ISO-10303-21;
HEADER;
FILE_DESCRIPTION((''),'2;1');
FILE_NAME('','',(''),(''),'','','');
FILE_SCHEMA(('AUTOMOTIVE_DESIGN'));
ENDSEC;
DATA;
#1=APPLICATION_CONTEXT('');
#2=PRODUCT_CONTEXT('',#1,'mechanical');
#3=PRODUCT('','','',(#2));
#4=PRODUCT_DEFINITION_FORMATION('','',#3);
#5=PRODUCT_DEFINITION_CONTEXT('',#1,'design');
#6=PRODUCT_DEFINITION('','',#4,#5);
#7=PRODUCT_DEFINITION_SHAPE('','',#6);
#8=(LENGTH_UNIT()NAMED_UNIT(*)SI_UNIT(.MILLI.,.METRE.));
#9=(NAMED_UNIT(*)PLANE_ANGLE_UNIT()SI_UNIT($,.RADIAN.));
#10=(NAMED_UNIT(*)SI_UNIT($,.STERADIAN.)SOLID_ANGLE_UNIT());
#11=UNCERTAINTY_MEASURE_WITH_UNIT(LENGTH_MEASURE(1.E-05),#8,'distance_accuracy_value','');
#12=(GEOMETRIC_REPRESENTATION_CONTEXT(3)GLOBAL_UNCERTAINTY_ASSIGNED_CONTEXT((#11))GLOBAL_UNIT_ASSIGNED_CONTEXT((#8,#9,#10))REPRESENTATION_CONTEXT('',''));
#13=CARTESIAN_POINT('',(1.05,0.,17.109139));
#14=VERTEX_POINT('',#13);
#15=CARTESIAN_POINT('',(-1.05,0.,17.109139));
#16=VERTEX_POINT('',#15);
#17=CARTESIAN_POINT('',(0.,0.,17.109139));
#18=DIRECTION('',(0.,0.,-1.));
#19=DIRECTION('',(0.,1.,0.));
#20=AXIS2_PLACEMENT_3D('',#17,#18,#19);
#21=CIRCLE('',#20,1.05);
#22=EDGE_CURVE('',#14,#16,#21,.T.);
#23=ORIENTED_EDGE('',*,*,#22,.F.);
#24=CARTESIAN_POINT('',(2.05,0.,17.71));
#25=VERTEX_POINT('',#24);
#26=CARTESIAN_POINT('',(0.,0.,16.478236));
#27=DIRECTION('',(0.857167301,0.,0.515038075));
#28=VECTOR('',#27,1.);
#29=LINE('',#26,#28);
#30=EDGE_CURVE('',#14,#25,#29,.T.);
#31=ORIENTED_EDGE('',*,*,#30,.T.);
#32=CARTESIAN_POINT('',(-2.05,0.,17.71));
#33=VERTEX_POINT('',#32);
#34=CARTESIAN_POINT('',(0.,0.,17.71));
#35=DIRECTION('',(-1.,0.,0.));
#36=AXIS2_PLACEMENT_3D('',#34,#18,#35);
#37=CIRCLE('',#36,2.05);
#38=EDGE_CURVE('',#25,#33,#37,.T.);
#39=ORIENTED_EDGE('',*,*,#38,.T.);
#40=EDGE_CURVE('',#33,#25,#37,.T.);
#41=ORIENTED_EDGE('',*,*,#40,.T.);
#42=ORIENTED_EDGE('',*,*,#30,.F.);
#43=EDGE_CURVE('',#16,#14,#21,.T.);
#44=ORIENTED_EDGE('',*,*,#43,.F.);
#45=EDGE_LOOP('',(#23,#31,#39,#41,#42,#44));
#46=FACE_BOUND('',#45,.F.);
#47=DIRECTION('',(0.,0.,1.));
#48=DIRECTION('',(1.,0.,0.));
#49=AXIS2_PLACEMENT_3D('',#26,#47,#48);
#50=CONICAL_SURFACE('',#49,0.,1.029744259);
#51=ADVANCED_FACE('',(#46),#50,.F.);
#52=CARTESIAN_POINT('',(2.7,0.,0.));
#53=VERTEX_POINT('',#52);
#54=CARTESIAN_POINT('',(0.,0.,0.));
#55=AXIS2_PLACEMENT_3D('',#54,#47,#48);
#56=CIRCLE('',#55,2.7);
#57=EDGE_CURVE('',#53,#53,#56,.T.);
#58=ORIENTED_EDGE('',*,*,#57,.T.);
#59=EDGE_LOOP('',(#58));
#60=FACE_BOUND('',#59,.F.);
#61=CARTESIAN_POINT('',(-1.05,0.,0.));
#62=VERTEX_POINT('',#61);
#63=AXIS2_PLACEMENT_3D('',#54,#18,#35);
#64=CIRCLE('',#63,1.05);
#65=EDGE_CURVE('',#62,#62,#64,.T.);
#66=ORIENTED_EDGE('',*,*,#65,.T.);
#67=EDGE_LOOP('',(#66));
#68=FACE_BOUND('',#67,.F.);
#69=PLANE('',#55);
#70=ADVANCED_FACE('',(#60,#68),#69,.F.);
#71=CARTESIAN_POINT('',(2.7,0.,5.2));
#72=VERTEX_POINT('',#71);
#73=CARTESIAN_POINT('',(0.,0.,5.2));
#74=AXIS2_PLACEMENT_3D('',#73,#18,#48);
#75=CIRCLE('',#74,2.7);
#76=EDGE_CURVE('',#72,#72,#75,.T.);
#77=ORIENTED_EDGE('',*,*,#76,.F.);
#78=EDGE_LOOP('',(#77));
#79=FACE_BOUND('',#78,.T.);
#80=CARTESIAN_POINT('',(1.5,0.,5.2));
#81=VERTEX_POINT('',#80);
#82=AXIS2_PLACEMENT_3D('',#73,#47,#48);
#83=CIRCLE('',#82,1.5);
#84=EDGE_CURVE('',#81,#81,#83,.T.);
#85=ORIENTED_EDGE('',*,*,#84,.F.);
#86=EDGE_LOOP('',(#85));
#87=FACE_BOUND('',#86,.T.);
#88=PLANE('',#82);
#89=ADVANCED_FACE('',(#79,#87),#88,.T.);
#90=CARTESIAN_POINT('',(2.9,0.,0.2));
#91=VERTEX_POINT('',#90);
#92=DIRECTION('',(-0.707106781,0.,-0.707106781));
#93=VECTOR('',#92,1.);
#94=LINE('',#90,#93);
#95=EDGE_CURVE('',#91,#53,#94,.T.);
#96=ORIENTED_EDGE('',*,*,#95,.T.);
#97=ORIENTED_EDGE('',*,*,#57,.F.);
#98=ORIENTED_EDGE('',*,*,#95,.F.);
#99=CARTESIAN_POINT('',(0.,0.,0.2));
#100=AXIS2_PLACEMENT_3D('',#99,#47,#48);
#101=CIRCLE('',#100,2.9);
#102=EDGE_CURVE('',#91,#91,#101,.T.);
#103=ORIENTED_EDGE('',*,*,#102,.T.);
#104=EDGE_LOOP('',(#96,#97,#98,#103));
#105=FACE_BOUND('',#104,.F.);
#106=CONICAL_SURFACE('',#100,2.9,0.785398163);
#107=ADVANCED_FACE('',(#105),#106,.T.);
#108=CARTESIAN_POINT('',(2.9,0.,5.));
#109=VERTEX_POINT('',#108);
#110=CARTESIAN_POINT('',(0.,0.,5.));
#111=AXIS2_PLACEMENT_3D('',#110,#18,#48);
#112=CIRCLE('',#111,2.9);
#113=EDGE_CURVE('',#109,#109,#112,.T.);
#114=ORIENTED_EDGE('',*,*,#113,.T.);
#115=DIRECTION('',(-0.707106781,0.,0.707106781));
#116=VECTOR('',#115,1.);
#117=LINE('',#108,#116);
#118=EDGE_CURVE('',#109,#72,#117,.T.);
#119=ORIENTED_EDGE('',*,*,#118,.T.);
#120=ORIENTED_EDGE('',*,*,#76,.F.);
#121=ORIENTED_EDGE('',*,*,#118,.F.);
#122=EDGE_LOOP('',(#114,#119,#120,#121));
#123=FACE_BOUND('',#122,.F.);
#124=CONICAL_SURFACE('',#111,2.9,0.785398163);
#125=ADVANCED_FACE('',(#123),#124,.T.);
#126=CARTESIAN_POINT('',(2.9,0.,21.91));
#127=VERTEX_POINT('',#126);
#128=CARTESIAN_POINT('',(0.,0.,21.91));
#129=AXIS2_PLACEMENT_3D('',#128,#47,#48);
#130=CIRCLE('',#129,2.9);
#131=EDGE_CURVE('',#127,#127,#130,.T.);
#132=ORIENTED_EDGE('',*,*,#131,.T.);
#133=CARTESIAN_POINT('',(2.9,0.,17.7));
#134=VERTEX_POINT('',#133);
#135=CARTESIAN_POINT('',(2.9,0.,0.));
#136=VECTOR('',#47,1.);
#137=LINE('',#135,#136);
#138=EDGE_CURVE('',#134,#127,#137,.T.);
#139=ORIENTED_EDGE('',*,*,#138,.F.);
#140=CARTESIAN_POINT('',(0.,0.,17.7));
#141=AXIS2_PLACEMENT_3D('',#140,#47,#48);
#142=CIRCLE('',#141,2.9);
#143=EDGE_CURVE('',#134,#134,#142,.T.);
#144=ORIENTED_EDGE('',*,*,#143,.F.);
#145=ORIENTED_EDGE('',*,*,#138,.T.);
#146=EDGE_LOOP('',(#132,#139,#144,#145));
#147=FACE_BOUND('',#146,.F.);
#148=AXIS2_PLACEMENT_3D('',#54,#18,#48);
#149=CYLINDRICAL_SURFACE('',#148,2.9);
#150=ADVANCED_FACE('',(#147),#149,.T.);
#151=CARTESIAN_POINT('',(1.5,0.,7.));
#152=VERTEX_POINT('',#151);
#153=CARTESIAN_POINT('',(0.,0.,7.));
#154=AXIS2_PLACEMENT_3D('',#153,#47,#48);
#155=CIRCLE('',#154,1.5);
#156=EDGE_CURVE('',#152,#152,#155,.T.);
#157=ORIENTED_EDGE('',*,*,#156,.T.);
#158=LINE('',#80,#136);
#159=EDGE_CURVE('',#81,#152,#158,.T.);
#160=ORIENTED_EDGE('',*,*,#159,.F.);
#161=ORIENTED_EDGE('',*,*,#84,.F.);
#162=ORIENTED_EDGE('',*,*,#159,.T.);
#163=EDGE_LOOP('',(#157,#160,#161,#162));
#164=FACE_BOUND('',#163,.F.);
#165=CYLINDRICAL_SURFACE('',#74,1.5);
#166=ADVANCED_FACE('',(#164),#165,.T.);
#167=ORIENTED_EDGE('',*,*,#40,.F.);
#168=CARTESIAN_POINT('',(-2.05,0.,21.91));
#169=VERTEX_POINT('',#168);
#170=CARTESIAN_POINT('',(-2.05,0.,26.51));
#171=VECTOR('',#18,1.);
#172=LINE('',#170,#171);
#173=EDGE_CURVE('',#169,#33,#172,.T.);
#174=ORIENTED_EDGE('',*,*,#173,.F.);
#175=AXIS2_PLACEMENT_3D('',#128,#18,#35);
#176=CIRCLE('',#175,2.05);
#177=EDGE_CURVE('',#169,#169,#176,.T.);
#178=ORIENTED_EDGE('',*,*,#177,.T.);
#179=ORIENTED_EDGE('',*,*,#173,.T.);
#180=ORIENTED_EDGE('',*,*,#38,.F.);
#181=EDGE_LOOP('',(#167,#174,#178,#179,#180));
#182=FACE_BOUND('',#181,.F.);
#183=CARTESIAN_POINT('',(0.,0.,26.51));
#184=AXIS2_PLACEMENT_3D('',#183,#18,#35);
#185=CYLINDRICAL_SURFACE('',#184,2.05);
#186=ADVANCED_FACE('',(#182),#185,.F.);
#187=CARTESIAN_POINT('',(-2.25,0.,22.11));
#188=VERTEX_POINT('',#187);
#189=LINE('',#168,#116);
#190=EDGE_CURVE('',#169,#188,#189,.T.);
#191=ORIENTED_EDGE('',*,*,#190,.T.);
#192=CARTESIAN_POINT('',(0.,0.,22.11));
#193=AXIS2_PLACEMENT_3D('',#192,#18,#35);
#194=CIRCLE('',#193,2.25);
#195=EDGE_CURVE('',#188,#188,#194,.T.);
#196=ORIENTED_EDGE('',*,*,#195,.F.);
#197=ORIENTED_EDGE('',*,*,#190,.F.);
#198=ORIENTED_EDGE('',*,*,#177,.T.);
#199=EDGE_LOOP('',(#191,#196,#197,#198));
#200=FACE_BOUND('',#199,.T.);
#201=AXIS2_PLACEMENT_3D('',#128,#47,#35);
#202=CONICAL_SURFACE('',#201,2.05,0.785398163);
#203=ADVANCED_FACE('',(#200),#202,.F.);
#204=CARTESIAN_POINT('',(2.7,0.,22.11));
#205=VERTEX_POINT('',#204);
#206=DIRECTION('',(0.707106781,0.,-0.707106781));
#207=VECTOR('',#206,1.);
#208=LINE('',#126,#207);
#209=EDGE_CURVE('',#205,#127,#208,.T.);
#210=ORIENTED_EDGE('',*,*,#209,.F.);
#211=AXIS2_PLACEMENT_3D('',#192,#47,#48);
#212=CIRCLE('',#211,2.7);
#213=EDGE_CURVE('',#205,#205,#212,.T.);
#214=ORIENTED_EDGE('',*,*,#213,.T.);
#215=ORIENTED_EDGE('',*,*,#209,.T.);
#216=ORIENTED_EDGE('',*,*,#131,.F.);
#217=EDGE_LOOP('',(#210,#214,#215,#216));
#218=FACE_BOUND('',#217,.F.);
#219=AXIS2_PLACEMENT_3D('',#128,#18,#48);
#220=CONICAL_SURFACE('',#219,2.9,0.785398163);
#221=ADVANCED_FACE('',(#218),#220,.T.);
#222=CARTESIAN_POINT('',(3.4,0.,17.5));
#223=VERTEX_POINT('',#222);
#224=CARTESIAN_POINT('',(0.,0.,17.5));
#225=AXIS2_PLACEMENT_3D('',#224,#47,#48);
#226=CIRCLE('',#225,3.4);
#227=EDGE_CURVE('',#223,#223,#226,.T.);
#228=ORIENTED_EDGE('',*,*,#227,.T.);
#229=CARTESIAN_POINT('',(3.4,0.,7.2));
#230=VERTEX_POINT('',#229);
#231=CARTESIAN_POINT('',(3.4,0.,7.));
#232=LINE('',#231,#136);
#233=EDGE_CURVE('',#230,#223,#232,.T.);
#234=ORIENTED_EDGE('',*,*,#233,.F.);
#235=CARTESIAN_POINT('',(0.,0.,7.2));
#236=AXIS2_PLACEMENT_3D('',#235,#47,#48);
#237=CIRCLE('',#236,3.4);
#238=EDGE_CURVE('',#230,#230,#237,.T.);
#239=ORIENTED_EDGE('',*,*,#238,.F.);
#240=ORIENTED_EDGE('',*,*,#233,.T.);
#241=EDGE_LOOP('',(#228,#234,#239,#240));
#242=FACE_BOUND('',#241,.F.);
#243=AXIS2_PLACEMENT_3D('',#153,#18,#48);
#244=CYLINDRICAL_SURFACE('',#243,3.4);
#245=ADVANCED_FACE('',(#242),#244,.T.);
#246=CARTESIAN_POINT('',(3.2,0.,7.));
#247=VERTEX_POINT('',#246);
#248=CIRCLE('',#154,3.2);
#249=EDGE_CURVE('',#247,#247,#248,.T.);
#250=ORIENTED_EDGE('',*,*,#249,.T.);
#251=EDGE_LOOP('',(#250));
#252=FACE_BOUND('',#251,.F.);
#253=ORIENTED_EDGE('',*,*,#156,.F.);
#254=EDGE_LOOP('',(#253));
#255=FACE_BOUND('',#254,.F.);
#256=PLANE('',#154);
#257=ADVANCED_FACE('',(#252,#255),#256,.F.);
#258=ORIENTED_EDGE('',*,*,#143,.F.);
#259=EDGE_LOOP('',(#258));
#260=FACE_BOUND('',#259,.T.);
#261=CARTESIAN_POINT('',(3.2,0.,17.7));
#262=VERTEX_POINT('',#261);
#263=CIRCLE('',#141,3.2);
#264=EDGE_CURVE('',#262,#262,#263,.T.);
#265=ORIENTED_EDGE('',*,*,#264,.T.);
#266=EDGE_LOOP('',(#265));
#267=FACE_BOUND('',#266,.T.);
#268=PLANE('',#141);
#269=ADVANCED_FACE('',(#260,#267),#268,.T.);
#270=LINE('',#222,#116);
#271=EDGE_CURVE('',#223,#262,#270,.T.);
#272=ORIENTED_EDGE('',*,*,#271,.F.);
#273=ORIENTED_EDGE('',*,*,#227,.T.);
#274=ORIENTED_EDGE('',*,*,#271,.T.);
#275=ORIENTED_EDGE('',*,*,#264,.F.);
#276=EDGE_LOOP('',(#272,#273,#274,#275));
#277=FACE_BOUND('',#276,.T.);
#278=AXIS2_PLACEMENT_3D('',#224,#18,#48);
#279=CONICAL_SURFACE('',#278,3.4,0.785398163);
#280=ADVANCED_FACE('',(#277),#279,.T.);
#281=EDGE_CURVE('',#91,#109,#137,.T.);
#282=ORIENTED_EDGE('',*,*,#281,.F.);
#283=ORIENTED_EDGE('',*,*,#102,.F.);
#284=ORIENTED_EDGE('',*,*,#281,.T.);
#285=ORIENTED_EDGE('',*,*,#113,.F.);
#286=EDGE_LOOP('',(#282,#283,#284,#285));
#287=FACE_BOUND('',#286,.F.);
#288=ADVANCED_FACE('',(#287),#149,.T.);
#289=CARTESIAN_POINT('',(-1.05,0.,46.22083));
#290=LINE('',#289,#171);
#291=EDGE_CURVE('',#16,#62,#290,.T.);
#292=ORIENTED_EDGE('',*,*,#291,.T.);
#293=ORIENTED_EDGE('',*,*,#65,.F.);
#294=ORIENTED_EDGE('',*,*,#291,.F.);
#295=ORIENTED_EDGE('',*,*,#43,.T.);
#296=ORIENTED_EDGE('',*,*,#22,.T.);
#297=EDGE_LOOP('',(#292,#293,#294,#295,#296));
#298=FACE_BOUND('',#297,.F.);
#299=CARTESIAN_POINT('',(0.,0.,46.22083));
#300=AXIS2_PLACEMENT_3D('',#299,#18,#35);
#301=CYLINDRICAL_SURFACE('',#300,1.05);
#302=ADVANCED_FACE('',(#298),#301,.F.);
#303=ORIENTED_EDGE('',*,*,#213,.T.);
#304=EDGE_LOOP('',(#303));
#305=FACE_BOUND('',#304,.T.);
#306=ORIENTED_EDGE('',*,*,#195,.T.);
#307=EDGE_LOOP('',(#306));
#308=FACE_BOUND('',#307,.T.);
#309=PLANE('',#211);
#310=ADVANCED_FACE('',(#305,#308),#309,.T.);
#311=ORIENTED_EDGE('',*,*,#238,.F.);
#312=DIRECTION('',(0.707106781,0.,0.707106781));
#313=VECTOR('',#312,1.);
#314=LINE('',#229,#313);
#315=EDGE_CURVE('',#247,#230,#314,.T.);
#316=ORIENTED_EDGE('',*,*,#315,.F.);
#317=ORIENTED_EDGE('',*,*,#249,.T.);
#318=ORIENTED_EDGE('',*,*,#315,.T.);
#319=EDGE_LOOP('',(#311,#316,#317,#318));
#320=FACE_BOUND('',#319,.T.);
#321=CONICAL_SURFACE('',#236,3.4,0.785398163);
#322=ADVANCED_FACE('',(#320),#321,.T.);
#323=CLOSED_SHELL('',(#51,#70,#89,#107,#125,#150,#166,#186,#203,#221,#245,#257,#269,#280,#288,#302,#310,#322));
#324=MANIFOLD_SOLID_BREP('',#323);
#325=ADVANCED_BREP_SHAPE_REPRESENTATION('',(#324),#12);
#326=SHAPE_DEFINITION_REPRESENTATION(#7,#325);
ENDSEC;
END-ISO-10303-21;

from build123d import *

# Parameters (mm, degrees)
F0_R     = 2.9
F0_R_2   = 1.5
F1_DEPTH = 22.11
F2_START = 7
F0_R_3   = 3.4
F2_DEPTH = 10.7
F3_START = 5.2
F3_DEPTH = 1.8
F5_D     = 2.1
F6_D     = 4.1
F6_DEPTH = 4.4
F6_TIP   = 1.231764269
F7_SIZE  = 0.2


with BuildPart() as f1:
    # F0 (on Top) → F1 (new body)
    with BuildSketch(Plane.XY):
        Circle(F0_R)
        Circle(F0_R_2, mode=Mode.SUBTRACT)
        Circle(F0_R_2)
    extrude(amount=F1_DEPTH)

    # F0 (on Top) → F2 (join)
    with BuildSketch(Plane.XY.offset(F2_START)):
        Circle(F0_R_3)
        Circle(F0_R, mode=Mode.SUBTRACT)
    extrude(amount=F2_DEPTH)

    # F0 (on Top) → F3 (cut)
    with BuildSketch(Plane.XY.offset(F3_START)):
        Circle(F0_R_3)
        Circle(F0_R, mode=Mode.SUBTRACT)
        Circle(F0_R)
        Circle(F0_R_2, mode=Mode.SUBTRACT)
    extrude(amount=F3_DEPTH, mode=Mode.SUBTRACT)

    # F5 (through all)
    with Locations(Plane.XY.offset(22.11)):
        with Locations((0, 0)):
            Hole(F5_D / 2)

    # F6
    with Locations(Plane.XY.offset(22.11)):
        with Locations((0, 0)):
            Hole(F6_D / 2, depth=F6_DEPTH)
            with Locations((0, 0, -(F6_DEPTH + F6_TIP / 2))):  # 118° drill point
                Cone(0, F6_D / 2, F6_TIP, mode=Mode.SUBTRACT)

    # F7
    f7_edges = [f1.edges().sort_by_distance(p)[0] for p in [
        (-2.9, 0, 22.11),
        (-2.9, 0, 5.2),
        (-2.9, 0, 0),
        (-3.4, 0, 7),
        (-3.4, 0, 17.7),
        (-2.05, 0, 22.11),
    ]]
    chamfer(f7_edges, length=F7_SIZE)


solid = f1.part
